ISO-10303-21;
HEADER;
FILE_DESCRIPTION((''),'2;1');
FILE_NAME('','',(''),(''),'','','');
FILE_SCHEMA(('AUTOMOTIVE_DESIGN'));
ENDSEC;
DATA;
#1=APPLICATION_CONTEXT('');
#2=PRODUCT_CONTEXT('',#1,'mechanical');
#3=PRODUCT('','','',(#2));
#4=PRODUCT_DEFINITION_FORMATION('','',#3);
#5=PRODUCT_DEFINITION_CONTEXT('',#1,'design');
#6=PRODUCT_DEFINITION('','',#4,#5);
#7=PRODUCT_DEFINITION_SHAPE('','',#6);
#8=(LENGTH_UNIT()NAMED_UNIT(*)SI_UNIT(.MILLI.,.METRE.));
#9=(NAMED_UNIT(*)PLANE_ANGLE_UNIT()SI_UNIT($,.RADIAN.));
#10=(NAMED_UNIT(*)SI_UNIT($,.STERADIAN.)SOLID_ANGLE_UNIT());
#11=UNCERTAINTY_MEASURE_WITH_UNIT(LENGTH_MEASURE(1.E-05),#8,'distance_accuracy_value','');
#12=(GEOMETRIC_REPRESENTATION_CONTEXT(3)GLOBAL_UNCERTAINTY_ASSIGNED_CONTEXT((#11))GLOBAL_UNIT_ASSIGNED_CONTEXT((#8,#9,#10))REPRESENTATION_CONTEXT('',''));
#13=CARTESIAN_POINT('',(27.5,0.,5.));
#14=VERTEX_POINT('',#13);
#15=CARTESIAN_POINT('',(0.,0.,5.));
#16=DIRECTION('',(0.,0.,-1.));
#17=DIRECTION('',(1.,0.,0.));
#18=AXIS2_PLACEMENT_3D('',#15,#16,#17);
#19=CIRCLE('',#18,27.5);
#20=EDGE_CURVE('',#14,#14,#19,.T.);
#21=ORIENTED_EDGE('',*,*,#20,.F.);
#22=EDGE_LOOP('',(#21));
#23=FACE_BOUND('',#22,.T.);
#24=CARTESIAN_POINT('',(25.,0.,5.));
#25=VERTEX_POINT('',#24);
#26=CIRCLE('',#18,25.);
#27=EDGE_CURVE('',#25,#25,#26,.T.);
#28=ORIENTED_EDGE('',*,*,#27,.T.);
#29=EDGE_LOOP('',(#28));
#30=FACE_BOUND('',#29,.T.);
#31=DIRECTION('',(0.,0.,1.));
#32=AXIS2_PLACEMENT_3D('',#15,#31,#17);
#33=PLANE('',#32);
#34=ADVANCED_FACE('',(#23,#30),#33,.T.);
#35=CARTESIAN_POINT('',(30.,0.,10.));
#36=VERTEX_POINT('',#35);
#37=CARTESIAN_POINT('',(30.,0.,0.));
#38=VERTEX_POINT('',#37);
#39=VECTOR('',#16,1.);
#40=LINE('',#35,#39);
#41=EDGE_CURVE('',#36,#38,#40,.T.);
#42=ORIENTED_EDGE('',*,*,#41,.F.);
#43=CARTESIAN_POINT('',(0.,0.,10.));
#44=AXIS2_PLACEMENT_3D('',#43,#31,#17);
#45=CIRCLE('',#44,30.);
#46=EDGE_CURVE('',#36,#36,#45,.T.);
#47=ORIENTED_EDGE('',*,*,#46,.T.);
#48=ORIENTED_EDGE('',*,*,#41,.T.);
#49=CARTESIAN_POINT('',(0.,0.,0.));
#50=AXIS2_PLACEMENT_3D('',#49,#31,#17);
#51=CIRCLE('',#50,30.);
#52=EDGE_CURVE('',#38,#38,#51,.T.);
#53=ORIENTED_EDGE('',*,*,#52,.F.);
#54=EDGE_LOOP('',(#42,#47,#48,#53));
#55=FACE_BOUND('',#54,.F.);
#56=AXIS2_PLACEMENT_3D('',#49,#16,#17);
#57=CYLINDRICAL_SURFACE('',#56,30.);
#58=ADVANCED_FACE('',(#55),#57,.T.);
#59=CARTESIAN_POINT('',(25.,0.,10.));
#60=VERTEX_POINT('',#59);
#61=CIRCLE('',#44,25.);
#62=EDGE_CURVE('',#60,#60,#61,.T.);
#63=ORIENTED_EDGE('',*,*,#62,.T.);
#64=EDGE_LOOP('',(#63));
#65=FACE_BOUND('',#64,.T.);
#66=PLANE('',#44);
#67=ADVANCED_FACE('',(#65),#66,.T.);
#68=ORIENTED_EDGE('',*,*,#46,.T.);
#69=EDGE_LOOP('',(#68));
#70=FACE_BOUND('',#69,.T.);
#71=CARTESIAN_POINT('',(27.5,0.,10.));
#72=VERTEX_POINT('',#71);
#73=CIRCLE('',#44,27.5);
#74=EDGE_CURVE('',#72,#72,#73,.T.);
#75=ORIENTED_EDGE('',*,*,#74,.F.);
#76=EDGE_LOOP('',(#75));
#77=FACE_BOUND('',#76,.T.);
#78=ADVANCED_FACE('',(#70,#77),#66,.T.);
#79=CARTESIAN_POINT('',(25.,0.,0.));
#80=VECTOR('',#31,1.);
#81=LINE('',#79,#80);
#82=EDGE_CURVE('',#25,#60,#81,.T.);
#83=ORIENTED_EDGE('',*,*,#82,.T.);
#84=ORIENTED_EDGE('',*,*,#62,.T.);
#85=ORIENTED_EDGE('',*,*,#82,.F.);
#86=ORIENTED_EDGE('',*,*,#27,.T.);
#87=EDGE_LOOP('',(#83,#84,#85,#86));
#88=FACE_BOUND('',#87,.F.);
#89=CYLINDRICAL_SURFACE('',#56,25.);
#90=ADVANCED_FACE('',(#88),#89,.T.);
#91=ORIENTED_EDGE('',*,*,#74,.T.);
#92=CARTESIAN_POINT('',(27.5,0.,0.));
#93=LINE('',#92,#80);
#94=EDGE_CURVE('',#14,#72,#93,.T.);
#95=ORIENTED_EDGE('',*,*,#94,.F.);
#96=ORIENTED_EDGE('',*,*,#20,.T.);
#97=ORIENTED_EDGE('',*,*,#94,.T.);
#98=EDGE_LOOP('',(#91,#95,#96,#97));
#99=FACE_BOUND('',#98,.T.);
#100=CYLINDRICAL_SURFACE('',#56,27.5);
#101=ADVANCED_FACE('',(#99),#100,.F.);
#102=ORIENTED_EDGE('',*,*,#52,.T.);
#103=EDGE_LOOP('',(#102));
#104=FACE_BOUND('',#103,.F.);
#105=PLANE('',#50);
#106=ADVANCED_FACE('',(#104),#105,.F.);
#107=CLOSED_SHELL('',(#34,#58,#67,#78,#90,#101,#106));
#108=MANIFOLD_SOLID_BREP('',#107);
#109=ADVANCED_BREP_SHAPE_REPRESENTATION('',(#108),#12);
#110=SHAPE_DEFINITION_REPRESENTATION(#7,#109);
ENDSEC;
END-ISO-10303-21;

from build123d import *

# Parameters (mm, degrees)
F0_R      = 30
F0_R_2    = 27.5
F1_DEPTH  = 5
F2_DEPTH  = 10
F3_DEPTH  = 7.5
F4_R      = 30
F5_DEPTH  = 5
F6_R      = 30
F6_R_2    = 27.5
F7_DEPTH  = 2.5
F8_R      = 17.5
F9_DEPTH  = 3
F10_R     = 25
F11_DEPTH = 10


# Not quite as in the source:
# - a feature names something its author has since deleted; it is built from what else it names


with BuildPart() as f1:
    # F0 (on Top) → F1 (new body)
    with BuildSketch(Plane.XY):
        Circle(F0_R)
        Circle(F0_R_2, mode=Mode.SUBTRACT)
    extrude(amount=F1_DEPTH)

    # F0 (on Top) → F2 (join)
    with BuildSketch(Plane.XY):
        Circle(F0_R)
        Circle(F0_R_2, mode=Mode.SUBTRACT)
    extrude(amount=F2_DEPTH)

    # F0 (on Top) → F3 (join)
    with BuildSketch(Plane.XY):
        Circle(F0_R)
        Circle(F0_R_2, mode=Mode.SUBTRACT)
    extrude(amount=F3_DEPTH)

    # F4 (on Top) → F5 (join)
    with BuildSketch(Plane.XY):
        Circle(F4_R)
    extrude(amount=F5_DEPTH)

    # F6 (on Top) → F7 (join)
    with BuildSketch(Plane.XY):
        Circle(F6_R)
        Circle(F6_R_2, mode=Mode.SUBTRACT)
    extrude(amount=F7_DEPTH)

    # F8 (on Top) → F9 (join)
    with BuildSketch(Plane.XY):
        Circle(F8_R)
    extrude(amount=F9_DEPTH)

    # F10 (on Top) → F11 (join)
    with BuildSketch(Plane.XY):
        Circle(F10_R)
    extrude(amount=F11_DEPTH)


solid = f1.part
